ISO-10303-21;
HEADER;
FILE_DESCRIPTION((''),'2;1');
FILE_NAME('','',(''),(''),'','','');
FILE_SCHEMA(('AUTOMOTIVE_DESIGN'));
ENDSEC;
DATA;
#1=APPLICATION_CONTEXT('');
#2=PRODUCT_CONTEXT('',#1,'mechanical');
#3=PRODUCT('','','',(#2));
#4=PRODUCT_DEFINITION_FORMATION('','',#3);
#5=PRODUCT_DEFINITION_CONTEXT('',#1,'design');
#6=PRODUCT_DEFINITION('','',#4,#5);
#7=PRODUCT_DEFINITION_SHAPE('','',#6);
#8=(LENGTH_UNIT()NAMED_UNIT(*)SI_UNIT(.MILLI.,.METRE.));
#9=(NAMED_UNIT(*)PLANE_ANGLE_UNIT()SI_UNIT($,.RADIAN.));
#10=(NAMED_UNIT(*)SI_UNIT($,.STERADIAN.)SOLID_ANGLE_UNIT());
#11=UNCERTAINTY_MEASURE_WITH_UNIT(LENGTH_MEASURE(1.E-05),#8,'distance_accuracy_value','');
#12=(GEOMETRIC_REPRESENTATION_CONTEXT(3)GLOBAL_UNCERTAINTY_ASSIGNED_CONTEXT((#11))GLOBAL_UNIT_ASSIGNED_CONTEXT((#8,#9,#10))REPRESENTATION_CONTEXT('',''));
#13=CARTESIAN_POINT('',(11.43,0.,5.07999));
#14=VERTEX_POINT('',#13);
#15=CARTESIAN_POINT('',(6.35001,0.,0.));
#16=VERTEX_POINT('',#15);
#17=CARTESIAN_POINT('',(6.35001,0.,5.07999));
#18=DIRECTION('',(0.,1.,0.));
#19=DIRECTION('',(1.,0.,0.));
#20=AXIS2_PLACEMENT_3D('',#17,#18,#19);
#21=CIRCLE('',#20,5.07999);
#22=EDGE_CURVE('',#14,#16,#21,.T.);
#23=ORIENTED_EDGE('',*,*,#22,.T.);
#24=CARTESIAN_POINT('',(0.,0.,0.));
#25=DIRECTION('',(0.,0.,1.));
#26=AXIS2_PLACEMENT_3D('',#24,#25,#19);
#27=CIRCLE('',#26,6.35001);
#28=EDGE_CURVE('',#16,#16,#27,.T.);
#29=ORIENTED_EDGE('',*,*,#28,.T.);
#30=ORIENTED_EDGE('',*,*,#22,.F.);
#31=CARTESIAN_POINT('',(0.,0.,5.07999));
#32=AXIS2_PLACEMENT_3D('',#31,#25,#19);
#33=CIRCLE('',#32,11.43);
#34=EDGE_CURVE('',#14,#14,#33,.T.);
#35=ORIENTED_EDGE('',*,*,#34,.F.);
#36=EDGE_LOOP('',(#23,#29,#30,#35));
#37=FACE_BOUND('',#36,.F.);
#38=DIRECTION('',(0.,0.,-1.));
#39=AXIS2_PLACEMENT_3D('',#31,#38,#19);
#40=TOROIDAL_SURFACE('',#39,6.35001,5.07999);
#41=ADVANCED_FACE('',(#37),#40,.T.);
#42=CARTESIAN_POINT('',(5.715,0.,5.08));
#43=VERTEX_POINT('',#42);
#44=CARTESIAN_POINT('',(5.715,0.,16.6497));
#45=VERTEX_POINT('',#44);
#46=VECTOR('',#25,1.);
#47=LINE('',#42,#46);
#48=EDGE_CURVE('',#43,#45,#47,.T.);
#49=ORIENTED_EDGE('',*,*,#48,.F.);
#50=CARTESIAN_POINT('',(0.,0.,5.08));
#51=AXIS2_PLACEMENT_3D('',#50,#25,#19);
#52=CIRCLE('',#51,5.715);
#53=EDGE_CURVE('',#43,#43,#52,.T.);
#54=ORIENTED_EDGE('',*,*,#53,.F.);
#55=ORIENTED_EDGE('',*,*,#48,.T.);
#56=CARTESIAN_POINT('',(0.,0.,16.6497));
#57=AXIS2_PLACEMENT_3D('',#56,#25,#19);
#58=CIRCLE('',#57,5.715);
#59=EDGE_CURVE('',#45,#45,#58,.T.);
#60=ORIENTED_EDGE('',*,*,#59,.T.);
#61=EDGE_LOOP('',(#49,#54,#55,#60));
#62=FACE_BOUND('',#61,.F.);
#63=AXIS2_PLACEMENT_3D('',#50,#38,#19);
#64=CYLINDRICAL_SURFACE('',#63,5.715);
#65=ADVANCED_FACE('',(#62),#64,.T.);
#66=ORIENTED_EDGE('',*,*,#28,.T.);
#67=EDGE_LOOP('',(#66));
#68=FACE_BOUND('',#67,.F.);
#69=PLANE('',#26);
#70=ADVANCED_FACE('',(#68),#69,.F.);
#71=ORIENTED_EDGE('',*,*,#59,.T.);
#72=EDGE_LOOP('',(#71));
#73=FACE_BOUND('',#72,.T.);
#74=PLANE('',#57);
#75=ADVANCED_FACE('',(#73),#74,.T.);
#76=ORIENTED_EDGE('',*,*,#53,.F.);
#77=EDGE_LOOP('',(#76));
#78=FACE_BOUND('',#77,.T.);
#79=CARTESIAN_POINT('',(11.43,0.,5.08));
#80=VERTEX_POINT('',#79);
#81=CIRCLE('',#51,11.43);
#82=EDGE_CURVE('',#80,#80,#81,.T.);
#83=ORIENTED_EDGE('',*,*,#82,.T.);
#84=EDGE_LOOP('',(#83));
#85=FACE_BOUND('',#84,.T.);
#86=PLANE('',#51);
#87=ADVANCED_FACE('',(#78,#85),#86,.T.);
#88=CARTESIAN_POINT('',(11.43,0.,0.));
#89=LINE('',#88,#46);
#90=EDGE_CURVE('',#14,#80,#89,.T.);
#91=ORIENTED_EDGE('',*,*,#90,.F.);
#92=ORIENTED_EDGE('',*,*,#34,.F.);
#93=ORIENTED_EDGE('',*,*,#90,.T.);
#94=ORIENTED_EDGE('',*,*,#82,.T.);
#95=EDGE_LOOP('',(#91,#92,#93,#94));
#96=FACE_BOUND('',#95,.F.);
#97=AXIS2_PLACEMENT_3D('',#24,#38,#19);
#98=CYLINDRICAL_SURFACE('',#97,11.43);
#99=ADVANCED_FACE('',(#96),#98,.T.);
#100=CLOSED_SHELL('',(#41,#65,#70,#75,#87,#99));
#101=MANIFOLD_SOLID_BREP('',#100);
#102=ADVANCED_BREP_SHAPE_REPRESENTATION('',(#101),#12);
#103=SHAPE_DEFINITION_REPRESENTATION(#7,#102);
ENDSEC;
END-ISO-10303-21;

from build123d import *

# Parameters (mm, degrees)
F0_R     = 11.43
F1_DEPTH = 5.08
F2_R     = 5.07999
F3_R     = 5.715
F4_DEPTH = 11.5697


# Not quite as in the source:
# - a fillet or chamfer is up to 0.001 mm smaller than in the source, because OpenCascade refuses the exact size


with BuildPart() as f1:
    # F0 (on Top) → F1 (new body)
    with BuildSketch(Plane.XY):
        Circle(F0_R)
    extrude(amount=F1_DEPTH)

    # F2 (radius 5.08 in the source; OpenCascade refuses exactly that, so slightly less here)
    f2_edges = [f1.edges().sort_by_distance(p)[0] for p in [
        (-11.43, 0, 0),
    ]]
    fillet(f2_edges, radius=F2_R)

    # F3 (on face) → F4 (join)
    with BuildSketch(Plane.XY.offset(5.08)):
        Circle(F3_R)
    extrude(amount=F4_DEPTH)


solid = f1.part
